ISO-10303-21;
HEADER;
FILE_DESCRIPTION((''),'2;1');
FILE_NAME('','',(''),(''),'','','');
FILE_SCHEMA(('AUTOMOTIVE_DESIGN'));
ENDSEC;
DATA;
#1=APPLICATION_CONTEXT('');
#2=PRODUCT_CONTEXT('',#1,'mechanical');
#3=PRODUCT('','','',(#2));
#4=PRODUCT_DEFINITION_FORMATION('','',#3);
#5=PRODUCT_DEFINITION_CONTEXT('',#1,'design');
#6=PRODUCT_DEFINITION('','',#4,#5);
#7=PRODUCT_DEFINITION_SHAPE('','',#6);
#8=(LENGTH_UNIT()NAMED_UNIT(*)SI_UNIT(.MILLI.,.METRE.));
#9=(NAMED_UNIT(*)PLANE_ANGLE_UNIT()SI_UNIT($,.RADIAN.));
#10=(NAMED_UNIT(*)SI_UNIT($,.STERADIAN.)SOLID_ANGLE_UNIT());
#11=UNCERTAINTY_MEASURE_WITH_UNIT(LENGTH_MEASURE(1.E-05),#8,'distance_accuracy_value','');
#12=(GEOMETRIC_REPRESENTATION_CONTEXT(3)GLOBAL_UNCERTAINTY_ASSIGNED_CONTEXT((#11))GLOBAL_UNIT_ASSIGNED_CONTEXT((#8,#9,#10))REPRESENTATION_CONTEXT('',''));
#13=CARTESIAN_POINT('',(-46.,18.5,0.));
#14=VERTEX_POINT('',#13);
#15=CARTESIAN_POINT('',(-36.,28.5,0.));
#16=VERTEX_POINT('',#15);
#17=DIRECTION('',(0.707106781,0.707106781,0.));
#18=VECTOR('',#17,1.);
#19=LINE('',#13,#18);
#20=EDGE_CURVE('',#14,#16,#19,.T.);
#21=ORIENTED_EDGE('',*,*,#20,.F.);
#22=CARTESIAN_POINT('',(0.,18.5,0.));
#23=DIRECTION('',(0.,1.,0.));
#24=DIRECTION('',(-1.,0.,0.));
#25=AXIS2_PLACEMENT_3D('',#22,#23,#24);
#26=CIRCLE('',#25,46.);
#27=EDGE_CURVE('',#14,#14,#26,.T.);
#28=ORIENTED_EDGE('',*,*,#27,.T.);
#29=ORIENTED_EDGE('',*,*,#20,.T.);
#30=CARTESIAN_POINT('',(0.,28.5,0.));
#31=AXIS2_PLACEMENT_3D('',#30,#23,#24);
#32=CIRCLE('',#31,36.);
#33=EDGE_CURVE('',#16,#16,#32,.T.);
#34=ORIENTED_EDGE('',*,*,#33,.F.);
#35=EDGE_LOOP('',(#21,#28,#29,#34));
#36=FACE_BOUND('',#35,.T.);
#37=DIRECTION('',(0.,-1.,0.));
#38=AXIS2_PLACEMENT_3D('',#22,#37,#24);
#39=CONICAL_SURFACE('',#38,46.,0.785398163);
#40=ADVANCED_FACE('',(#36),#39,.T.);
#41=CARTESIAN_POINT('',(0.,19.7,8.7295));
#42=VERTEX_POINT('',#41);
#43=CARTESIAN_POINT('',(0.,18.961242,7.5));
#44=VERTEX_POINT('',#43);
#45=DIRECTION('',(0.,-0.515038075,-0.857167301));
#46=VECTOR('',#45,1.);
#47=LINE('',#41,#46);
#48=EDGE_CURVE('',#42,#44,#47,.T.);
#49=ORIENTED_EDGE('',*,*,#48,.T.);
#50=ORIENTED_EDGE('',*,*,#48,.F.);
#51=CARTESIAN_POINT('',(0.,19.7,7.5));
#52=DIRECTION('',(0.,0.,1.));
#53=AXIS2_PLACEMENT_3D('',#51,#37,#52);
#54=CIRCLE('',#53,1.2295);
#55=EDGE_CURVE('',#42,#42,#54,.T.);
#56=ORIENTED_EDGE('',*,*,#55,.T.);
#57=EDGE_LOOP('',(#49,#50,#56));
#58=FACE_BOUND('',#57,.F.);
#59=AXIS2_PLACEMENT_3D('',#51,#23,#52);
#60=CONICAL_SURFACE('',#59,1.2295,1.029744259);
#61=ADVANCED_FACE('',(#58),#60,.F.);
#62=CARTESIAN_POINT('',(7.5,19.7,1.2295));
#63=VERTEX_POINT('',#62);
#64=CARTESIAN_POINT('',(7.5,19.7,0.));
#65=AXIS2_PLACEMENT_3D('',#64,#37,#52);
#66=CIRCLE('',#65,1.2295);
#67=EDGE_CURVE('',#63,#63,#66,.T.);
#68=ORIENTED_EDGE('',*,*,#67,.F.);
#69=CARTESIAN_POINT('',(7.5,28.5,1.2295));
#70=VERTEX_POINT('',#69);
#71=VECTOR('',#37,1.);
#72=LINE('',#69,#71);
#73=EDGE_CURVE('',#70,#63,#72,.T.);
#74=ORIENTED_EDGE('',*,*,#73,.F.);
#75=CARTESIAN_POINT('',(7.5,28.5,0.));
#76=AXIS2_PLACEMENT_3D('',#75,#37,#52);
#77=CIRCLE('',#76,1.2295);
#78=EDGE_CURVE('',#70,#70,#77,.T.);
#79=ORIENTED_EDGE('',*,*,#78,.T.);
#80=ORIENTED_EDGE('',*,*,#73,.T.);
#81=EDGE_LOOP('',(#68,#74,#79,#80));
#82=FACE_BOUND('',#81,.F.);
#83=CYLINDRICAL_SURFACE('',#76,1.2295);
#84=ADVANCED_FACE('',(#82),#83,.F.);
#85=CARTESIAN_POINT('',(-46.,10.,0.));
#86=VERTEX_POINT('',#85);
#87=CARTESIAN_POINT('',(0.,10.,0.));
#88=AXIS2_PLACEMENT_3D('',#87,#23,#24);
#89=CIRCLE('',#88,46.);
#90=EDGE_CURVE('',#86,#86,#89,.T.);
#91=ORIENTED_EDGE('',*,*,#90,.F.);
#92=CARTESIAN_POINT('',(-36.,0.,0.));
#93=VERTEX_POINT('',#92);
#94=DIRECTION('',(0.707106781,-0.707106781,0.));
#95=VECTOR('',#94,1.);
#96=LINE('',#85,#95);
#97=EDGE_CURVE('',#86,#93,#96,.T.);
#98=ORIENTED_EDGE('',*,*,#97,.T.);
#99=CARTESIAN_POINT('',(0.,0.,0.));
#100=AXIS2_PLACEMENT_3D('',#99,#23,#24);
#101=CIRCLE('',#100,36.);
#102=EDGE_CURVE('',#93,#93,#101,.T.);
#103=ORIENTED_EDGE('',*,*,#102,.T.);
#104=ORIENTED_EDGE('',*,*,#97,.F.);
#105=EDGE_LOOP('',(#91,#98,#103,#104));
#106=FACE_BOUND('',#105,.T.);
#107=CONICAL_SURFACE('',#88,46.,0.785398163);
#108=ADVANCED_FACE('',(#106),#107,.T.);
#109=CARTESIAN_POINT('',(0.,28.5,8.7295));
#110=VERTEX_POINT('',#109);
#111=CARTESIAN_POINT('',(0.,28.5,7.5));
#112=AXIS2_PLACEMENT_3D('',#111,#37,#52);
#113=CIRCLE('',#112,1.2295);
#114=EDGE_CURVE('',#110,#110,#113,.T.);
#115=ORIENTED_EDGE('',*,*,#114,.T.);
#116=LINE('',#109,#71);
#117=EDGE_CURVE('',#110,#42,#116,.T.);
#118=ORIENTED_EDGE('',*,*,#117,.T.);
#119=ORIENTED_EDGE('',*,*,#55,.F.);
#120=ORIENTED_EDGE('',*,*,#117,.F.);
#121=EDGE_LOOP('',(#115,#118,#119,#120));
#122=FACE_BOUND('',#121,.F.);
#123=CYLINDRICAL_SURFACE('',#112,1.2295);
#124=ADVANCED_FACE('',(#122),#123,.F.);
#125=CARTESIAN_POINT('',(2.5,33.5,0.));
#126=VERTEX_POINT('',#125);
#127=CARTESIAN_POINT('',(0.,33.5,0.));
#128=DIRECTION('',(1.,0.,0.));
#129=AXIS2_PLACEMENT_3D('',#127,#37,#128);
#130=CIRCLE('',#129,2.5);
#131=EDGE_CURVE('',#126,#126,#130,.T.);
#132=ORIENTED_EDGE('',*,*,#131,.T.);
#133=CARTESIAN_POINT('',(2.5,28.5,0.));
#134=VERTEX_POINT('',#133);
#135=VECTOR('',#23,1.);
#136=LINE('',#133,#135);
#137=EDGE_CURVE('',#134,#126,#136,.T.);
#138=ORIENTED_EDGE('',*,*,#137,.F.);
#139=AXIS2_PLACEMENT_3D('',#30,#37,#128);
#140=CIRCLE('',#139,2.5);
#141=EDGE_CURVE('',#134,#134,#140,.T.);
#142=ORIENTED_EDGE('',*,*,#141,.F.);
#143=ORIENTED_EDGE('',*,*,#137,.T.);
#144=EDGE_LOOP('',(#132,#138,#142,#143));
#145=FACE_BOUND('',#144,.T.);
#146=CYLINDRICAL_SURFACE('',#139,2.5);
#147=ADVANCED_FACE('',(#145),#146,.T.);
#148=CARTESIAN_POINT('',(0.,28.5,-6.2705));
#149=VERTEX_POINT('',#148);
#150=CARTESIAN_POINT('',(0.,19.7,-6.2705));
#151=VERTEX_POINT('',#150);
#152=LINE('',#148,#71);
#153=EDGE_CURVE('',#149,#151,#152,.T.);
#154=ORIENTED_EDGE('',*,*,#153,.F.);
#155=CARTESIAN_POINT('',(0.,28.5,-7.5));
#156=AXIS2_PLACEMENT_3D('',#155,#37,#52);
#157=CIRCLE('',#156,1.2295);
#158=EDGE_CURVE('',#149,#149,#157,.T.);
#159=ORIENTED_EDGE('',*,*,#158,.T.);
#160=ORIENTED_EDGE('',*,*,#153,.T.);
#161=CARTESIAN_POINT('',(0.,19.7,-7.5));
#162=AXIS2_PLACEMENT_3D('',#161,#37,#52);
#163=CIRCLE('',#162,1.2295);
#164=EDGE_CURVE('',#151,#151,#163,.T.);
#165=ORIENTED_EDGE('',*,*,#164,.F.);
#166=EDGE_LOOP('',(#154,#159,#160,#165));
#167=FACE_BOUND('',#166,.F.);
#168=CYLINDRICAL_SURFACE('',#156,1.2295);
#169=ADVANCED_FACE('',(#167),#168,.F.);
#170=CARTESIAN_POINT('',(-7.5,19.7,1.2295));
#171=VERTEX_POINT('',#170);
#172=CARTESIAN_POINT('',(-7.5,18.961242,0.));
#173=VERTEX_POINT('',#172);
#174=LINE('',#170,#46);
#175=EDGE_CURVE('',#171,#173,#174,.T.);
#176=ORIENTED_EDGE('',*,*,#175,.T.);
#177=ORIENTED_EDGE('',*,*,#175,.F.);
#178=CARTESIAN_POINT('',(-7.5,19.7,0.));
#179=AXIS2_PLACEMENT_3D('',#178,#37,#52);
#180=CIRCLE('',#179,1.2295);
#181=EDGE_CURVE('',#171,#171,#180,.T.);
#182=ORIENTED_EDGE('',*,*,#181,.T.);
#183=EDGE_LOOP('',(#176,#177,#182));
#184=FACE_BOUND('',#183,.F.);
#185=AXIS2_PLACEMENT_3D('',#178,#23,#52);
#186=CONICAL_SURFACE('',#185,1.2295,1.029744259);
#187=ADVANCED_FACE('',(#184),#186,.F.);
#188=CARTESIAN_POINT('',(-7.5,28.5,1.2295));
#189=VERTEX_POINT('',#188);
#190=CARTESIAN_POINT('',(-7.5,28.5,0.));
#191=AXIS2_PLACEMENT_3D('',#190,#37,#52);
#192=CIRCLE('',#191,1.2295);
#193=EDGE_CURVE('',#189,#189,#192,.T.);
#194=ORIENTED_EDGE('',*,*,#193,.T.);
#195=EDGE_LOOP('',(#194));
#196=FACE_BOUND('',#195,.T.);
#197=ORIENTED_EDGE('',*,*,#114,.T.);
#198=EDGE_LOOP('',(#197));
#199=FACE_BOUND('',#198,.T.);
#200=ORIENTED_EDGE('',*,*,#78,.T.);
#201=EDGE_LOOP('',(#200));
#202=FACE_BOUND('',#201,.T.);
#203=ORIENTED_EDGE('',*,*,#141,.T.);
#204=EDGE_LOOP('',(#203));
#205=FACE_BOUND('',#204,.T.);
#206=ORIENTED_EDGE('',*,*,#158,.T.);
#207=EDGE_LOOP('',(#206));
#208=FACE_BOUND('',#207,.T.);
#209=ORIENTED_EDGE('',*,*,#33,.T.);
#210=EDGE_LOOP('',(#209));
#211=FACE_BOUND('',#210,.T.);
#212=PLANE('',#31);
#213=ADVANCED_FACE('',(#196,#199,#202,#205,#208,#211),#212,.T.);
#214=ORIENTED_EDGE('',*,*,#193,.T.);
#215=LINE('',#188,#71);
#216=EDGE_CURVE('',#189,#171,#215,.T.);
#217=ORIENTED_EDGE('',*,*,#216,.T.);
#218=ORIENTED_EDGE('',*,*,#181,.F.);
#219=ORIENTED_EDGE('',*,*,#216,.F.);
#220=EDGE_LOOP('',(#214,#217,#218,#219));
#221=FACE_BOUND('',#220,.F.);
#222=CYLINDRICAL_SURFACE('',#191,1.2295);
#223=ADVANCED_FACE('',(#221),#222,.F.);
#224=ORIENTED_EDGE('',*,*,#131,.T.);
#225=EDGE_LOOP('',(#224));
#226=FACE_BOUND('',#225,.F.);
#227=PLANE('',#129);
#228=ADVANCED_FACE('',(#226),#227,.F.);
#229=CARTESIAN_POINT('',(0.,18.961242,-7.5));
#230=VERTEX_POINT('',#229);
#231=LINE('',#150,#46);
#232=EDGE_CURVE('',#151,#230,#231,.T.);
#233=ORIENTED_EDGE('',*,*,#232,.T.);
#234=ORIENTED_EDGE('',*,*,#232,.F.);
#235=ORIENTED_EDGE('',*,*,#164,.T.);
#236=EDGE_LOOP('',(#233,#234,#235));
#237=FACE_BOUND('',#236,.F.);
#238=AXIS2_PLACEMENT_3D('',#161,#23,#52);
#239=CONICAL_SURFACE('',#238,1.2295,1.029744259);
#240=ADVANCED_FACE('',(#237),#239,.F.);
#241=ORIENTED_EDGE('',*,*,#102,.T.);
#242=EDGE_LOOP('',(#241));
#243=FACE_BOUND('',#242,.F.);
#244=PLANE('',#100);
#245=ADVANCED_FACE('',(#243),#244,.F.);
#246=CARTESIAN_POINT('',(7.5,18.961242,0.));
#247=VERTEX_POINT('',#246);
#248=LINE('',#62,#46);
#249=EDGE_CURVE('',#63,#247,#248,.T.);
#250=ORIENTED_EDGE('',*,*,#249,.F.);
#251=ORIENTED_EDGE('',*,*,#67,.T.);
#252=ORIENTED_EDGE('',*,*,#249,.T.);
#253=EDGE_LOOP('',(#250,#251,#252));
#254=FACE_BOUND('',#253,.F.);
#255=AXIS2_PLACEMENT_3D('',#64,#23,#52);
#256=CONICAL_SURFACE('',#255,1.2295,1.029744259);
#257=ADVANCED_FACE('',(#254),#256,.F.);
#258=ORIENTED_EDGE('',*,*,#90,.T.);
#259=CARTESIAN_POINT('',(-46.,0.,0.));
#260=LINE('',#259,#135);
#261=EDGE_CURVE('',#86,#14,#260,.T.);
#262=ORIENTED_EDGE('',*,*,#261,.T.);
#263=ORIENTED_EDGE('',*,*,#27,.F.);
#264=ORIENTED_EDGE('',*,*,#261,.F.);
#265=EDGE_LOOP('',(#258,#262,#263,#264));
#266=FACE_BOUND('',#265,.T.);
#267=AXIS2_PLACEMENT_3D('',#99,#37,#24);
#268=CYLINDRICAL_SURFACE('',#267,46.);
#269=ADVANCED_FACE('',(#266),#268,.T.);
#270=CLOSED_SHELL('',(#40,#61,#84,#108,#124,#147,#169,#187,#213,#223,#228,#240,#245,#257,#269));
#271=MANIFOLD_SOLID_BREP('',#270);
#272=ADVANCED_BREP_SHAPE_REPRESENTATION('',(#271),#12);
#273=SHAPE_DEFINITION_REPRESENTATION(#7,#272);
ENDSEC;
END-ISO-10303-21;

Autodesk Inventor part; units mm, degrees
ref_plane "YZ Plane" through (0, 0, 0) normal (1, 0, 0) x (0, 1, 0)
ref_plane "XZ Plane" through (0, 0, 0) normal (0, 1, 0) x (-1, 0, 0)
ref_plane "XY Plane" through (0, 0, 0) normal (0, 0, 1) x (1, 0, 0)
sketch "Sketch1" plane through (0, 0, 0) normal (0, 1, 0) x (-1, 0, 0)
  circle A0 centre (0, 0) radius 46
  dimension "d2" = 92
extrude "Extrusion1" add sketch "Sketch1" along normal blind 28.5
chamfer "Chamfer1" distance 10 angle 45 2 edges at (46, 0, 0) (46, 28.5, 0)
sketch "Sketch2" plane through (0, 28.5, 0) normal (0, 1, 0) x (1, 0, 0)
  circle A0 centre (0, 0) radius 36 projected
  circle A1 centre (0, 0) radius 7.5 construction
  point P0 (-0.3002, 0.0027)
  point P1 (9.3558, -1.447)
  point P2 (7.5, 0)
  point P3 (0, -7.5)
  point P4 (-7.5, 0)
  point P5 (0, 7.5)
  dimension "d13" = 15
hole "Hole1" at (7.5, 28.5, 0) at (0, 28.5, 7.5) at (-7.5, 28.5, 0) at (0, 28.5, -7.5) direction (0, -1, 0) diameter 2.459 depth 8.8 tip angle 118 thread size "M3x0.5" class "6H" standard "ISO Metric profile"
sketch "Sketch3" plane through (0, 28.5, 0) normal (0, -1, 0) x (1, 0, 0)
  circle A0 centre (0, 0) radius 2.5
  dimension "d14" = 5
extrude "Extrusion2" add sketch "Sketch3" against normal blind 5
properties part number "EAGLE POWER 8308"
